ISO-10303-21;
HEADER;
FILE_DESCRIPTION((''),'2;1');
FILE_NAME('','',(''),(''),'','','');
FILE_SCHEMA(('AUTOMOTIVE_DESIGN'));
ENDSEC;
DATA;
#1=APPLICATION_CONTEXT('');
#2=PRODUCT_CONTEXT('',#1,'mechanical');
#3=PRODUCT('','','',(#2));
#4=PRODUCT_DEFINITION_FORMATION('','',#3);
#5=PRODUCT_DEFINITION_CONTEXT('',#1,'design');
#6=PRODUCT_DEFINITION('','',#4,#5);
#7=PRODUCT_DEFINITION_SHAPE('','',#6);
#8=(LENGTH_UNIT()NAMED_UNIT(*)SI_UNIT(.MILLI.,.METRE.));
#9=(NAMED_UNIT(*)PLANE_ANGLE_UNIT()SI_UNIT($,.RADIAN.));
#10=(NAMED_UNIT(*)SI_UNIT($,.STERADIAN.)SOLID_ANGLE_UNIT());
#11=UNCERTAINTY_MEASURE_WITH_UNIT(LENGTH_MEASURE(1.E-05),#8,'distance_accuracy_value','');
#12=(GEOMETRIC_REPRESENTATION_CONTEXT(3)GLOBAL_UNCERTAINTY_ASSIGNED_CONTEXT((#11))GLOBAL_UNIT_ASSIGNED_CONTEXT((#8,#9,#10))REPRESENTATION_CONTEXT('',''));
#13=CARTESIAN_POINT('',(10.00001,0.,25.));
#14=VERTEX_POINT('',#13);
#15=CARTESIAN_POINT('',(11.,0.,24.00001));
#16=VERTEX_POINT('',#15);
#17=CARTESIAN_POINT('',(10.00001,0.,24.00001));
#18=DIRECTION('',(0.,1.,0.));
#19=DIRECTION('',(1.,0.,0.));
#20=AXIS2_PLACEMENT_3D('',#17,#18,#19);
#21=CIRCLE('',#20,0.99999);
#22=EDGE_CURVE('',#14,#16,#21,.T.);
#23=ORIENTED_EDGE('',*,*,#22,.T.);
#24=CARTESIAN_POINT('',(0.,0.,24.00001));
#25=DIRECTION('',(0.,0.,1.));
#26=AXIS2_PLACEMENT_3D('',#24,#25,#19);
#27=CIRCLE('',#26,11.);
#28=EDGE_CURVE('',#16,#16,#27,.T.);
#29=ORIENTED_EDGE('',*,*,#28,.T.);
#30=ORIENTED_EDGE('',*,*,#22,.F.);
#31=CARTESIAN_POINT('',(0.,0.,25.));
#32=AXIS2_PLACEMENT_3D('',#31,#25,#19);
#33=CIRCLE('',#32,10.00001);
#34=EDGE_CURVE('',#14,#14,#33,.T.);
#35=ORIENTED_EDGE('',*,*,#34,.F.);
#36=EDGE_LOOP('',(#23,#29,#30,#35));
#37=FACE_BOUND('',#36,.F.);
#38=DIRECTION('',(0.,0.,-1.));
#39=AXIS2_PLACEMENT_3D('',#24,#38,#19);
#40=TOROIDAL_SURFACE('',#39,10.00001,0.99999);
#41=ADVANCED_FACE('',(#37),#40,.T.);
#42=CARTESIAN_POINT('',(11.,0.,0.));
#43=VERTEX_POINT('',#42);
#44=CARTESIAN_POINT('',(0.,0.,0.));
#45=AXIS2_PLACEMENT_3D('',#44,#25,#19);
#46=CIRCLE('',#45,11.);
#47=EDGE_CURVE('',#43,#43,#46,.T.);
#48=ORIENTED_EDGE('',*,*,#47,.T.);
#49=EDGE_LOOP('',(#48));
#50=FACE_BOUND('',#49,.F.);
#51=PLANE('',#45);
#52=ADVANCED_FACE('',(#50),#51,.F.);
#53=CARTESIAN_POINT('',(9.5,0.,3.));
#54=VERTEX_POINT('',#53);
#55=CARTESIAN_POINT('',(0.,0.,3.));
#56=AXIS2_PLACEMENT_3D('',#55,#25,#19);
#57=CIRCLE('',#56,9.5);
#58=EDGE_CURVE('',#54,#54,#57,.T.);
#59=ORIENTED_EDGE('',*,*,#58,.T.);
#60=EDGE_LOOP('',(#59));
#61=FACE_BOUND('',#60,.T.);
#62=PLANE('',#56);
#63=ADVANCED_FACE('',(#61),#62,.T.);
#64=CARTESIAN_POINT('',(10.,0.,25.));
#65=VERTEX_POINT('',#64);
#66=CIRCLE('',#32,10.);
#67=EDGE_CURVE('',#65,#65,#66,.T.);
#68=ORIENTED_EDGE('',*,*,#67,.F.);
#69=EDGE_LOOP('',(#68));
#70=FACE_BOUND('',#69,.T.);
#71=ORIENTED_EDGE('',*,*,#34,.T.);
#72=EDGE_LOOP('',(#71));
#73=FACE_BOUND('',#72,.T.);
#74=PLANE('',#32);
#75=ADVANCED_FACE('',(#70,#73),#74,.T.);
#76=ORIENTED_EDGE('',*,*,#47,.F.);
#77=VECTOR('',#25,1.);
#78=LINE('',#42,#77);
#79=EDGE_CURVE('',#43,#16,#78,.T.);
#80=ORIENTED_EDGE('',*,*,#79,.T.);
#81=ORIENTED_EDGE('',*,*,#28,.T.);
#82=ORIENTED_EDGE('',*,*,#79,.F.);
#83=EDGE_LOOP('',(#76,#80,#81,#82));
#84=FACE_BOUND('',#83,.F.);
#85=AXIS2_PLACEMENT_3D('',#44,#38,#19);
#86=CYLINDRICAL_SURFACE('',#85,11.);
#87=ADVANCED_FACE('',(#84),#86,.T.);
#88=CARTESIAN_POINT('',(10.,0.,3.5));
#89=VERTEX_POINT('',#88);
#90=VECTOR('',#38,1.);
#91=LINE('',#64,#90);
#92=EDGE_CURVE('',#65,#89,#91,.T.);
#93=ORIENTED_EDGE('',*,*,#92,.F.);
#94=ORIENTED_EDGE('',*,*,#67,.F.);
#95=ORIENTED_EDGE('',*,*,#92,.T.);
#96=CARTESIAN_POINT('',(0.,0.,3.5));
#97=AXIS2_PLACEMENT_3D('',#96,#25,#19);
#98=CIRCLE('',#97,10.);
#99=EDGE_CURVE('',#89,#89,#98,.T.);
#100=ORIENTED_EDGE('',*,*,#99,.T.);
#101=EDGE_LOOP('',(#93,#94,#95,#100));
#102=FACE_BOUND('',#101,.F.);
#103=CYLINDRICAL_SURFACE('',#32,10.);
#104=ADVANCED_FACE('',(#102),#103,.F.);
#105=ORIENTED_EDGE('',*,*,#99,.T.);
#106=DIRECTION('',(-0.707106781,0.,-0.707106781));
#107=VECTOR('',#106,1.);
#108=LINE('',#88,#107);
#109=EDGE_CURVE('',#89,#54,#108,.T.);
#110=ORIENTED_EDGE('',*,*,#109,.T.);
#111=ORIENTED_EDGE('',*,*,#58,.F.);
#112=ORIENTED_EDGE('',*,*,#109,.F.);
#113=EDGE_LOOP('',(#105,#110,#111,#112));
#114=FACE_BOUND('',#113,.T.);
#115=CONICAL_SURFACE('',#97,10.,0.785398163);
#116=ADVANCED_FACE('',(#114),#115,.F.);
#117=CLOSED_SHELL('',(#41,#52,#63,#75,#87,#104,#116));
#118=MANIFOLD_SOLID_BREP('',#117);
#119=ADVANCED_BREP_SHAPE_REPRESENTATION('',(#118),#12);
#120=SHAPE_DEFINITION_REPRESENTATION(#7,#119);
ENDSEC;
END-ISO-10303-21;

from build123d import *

# Parameters (mm, degrees)
F0_R     = 11
F1_DEPTH = 25
F2_R     = 10
F3_DEPTH = 22
F4_SIZE  = 0.5
F5_R     = 0.99999


# Not quite as in the source:
# - a fillet or chamfer is up to 0.001 mm smaller than in the source, because OpenCascade refuses the exact size


with BuildPart() as f1:
    # F0 (on Top) → F1 (new body)
    with BuildSketch(Plane.XY):
        Circle(F0_R)
    extrude(amount=F1_DEPTH)

    # F2 (on face) → F3 (cut)
    with BuildSketch(Plane.XY.offset(25)):
        Circle(F2_R)
    extrude(amount=-F3_DEPTH, mode=Mode.SUBTRACT)

    # F4
    f4_edges = [f1.edges().sort_by_distance(p)[0] for p in [
        (-10, 0, 3),
    ]]
    chamfer(f4_edges, length=F4_SIZE)

    # F5 (radius 1 in the source; OpenCascade refuses exactly that, so slightly less here)
    f5_edges = [f1.edges().sort_by_distance(p)[0] for p in [
        (-11, 0, 25),
    ]]
    fillet(f5_edges, radius=F5_R)


solid = f1.part
